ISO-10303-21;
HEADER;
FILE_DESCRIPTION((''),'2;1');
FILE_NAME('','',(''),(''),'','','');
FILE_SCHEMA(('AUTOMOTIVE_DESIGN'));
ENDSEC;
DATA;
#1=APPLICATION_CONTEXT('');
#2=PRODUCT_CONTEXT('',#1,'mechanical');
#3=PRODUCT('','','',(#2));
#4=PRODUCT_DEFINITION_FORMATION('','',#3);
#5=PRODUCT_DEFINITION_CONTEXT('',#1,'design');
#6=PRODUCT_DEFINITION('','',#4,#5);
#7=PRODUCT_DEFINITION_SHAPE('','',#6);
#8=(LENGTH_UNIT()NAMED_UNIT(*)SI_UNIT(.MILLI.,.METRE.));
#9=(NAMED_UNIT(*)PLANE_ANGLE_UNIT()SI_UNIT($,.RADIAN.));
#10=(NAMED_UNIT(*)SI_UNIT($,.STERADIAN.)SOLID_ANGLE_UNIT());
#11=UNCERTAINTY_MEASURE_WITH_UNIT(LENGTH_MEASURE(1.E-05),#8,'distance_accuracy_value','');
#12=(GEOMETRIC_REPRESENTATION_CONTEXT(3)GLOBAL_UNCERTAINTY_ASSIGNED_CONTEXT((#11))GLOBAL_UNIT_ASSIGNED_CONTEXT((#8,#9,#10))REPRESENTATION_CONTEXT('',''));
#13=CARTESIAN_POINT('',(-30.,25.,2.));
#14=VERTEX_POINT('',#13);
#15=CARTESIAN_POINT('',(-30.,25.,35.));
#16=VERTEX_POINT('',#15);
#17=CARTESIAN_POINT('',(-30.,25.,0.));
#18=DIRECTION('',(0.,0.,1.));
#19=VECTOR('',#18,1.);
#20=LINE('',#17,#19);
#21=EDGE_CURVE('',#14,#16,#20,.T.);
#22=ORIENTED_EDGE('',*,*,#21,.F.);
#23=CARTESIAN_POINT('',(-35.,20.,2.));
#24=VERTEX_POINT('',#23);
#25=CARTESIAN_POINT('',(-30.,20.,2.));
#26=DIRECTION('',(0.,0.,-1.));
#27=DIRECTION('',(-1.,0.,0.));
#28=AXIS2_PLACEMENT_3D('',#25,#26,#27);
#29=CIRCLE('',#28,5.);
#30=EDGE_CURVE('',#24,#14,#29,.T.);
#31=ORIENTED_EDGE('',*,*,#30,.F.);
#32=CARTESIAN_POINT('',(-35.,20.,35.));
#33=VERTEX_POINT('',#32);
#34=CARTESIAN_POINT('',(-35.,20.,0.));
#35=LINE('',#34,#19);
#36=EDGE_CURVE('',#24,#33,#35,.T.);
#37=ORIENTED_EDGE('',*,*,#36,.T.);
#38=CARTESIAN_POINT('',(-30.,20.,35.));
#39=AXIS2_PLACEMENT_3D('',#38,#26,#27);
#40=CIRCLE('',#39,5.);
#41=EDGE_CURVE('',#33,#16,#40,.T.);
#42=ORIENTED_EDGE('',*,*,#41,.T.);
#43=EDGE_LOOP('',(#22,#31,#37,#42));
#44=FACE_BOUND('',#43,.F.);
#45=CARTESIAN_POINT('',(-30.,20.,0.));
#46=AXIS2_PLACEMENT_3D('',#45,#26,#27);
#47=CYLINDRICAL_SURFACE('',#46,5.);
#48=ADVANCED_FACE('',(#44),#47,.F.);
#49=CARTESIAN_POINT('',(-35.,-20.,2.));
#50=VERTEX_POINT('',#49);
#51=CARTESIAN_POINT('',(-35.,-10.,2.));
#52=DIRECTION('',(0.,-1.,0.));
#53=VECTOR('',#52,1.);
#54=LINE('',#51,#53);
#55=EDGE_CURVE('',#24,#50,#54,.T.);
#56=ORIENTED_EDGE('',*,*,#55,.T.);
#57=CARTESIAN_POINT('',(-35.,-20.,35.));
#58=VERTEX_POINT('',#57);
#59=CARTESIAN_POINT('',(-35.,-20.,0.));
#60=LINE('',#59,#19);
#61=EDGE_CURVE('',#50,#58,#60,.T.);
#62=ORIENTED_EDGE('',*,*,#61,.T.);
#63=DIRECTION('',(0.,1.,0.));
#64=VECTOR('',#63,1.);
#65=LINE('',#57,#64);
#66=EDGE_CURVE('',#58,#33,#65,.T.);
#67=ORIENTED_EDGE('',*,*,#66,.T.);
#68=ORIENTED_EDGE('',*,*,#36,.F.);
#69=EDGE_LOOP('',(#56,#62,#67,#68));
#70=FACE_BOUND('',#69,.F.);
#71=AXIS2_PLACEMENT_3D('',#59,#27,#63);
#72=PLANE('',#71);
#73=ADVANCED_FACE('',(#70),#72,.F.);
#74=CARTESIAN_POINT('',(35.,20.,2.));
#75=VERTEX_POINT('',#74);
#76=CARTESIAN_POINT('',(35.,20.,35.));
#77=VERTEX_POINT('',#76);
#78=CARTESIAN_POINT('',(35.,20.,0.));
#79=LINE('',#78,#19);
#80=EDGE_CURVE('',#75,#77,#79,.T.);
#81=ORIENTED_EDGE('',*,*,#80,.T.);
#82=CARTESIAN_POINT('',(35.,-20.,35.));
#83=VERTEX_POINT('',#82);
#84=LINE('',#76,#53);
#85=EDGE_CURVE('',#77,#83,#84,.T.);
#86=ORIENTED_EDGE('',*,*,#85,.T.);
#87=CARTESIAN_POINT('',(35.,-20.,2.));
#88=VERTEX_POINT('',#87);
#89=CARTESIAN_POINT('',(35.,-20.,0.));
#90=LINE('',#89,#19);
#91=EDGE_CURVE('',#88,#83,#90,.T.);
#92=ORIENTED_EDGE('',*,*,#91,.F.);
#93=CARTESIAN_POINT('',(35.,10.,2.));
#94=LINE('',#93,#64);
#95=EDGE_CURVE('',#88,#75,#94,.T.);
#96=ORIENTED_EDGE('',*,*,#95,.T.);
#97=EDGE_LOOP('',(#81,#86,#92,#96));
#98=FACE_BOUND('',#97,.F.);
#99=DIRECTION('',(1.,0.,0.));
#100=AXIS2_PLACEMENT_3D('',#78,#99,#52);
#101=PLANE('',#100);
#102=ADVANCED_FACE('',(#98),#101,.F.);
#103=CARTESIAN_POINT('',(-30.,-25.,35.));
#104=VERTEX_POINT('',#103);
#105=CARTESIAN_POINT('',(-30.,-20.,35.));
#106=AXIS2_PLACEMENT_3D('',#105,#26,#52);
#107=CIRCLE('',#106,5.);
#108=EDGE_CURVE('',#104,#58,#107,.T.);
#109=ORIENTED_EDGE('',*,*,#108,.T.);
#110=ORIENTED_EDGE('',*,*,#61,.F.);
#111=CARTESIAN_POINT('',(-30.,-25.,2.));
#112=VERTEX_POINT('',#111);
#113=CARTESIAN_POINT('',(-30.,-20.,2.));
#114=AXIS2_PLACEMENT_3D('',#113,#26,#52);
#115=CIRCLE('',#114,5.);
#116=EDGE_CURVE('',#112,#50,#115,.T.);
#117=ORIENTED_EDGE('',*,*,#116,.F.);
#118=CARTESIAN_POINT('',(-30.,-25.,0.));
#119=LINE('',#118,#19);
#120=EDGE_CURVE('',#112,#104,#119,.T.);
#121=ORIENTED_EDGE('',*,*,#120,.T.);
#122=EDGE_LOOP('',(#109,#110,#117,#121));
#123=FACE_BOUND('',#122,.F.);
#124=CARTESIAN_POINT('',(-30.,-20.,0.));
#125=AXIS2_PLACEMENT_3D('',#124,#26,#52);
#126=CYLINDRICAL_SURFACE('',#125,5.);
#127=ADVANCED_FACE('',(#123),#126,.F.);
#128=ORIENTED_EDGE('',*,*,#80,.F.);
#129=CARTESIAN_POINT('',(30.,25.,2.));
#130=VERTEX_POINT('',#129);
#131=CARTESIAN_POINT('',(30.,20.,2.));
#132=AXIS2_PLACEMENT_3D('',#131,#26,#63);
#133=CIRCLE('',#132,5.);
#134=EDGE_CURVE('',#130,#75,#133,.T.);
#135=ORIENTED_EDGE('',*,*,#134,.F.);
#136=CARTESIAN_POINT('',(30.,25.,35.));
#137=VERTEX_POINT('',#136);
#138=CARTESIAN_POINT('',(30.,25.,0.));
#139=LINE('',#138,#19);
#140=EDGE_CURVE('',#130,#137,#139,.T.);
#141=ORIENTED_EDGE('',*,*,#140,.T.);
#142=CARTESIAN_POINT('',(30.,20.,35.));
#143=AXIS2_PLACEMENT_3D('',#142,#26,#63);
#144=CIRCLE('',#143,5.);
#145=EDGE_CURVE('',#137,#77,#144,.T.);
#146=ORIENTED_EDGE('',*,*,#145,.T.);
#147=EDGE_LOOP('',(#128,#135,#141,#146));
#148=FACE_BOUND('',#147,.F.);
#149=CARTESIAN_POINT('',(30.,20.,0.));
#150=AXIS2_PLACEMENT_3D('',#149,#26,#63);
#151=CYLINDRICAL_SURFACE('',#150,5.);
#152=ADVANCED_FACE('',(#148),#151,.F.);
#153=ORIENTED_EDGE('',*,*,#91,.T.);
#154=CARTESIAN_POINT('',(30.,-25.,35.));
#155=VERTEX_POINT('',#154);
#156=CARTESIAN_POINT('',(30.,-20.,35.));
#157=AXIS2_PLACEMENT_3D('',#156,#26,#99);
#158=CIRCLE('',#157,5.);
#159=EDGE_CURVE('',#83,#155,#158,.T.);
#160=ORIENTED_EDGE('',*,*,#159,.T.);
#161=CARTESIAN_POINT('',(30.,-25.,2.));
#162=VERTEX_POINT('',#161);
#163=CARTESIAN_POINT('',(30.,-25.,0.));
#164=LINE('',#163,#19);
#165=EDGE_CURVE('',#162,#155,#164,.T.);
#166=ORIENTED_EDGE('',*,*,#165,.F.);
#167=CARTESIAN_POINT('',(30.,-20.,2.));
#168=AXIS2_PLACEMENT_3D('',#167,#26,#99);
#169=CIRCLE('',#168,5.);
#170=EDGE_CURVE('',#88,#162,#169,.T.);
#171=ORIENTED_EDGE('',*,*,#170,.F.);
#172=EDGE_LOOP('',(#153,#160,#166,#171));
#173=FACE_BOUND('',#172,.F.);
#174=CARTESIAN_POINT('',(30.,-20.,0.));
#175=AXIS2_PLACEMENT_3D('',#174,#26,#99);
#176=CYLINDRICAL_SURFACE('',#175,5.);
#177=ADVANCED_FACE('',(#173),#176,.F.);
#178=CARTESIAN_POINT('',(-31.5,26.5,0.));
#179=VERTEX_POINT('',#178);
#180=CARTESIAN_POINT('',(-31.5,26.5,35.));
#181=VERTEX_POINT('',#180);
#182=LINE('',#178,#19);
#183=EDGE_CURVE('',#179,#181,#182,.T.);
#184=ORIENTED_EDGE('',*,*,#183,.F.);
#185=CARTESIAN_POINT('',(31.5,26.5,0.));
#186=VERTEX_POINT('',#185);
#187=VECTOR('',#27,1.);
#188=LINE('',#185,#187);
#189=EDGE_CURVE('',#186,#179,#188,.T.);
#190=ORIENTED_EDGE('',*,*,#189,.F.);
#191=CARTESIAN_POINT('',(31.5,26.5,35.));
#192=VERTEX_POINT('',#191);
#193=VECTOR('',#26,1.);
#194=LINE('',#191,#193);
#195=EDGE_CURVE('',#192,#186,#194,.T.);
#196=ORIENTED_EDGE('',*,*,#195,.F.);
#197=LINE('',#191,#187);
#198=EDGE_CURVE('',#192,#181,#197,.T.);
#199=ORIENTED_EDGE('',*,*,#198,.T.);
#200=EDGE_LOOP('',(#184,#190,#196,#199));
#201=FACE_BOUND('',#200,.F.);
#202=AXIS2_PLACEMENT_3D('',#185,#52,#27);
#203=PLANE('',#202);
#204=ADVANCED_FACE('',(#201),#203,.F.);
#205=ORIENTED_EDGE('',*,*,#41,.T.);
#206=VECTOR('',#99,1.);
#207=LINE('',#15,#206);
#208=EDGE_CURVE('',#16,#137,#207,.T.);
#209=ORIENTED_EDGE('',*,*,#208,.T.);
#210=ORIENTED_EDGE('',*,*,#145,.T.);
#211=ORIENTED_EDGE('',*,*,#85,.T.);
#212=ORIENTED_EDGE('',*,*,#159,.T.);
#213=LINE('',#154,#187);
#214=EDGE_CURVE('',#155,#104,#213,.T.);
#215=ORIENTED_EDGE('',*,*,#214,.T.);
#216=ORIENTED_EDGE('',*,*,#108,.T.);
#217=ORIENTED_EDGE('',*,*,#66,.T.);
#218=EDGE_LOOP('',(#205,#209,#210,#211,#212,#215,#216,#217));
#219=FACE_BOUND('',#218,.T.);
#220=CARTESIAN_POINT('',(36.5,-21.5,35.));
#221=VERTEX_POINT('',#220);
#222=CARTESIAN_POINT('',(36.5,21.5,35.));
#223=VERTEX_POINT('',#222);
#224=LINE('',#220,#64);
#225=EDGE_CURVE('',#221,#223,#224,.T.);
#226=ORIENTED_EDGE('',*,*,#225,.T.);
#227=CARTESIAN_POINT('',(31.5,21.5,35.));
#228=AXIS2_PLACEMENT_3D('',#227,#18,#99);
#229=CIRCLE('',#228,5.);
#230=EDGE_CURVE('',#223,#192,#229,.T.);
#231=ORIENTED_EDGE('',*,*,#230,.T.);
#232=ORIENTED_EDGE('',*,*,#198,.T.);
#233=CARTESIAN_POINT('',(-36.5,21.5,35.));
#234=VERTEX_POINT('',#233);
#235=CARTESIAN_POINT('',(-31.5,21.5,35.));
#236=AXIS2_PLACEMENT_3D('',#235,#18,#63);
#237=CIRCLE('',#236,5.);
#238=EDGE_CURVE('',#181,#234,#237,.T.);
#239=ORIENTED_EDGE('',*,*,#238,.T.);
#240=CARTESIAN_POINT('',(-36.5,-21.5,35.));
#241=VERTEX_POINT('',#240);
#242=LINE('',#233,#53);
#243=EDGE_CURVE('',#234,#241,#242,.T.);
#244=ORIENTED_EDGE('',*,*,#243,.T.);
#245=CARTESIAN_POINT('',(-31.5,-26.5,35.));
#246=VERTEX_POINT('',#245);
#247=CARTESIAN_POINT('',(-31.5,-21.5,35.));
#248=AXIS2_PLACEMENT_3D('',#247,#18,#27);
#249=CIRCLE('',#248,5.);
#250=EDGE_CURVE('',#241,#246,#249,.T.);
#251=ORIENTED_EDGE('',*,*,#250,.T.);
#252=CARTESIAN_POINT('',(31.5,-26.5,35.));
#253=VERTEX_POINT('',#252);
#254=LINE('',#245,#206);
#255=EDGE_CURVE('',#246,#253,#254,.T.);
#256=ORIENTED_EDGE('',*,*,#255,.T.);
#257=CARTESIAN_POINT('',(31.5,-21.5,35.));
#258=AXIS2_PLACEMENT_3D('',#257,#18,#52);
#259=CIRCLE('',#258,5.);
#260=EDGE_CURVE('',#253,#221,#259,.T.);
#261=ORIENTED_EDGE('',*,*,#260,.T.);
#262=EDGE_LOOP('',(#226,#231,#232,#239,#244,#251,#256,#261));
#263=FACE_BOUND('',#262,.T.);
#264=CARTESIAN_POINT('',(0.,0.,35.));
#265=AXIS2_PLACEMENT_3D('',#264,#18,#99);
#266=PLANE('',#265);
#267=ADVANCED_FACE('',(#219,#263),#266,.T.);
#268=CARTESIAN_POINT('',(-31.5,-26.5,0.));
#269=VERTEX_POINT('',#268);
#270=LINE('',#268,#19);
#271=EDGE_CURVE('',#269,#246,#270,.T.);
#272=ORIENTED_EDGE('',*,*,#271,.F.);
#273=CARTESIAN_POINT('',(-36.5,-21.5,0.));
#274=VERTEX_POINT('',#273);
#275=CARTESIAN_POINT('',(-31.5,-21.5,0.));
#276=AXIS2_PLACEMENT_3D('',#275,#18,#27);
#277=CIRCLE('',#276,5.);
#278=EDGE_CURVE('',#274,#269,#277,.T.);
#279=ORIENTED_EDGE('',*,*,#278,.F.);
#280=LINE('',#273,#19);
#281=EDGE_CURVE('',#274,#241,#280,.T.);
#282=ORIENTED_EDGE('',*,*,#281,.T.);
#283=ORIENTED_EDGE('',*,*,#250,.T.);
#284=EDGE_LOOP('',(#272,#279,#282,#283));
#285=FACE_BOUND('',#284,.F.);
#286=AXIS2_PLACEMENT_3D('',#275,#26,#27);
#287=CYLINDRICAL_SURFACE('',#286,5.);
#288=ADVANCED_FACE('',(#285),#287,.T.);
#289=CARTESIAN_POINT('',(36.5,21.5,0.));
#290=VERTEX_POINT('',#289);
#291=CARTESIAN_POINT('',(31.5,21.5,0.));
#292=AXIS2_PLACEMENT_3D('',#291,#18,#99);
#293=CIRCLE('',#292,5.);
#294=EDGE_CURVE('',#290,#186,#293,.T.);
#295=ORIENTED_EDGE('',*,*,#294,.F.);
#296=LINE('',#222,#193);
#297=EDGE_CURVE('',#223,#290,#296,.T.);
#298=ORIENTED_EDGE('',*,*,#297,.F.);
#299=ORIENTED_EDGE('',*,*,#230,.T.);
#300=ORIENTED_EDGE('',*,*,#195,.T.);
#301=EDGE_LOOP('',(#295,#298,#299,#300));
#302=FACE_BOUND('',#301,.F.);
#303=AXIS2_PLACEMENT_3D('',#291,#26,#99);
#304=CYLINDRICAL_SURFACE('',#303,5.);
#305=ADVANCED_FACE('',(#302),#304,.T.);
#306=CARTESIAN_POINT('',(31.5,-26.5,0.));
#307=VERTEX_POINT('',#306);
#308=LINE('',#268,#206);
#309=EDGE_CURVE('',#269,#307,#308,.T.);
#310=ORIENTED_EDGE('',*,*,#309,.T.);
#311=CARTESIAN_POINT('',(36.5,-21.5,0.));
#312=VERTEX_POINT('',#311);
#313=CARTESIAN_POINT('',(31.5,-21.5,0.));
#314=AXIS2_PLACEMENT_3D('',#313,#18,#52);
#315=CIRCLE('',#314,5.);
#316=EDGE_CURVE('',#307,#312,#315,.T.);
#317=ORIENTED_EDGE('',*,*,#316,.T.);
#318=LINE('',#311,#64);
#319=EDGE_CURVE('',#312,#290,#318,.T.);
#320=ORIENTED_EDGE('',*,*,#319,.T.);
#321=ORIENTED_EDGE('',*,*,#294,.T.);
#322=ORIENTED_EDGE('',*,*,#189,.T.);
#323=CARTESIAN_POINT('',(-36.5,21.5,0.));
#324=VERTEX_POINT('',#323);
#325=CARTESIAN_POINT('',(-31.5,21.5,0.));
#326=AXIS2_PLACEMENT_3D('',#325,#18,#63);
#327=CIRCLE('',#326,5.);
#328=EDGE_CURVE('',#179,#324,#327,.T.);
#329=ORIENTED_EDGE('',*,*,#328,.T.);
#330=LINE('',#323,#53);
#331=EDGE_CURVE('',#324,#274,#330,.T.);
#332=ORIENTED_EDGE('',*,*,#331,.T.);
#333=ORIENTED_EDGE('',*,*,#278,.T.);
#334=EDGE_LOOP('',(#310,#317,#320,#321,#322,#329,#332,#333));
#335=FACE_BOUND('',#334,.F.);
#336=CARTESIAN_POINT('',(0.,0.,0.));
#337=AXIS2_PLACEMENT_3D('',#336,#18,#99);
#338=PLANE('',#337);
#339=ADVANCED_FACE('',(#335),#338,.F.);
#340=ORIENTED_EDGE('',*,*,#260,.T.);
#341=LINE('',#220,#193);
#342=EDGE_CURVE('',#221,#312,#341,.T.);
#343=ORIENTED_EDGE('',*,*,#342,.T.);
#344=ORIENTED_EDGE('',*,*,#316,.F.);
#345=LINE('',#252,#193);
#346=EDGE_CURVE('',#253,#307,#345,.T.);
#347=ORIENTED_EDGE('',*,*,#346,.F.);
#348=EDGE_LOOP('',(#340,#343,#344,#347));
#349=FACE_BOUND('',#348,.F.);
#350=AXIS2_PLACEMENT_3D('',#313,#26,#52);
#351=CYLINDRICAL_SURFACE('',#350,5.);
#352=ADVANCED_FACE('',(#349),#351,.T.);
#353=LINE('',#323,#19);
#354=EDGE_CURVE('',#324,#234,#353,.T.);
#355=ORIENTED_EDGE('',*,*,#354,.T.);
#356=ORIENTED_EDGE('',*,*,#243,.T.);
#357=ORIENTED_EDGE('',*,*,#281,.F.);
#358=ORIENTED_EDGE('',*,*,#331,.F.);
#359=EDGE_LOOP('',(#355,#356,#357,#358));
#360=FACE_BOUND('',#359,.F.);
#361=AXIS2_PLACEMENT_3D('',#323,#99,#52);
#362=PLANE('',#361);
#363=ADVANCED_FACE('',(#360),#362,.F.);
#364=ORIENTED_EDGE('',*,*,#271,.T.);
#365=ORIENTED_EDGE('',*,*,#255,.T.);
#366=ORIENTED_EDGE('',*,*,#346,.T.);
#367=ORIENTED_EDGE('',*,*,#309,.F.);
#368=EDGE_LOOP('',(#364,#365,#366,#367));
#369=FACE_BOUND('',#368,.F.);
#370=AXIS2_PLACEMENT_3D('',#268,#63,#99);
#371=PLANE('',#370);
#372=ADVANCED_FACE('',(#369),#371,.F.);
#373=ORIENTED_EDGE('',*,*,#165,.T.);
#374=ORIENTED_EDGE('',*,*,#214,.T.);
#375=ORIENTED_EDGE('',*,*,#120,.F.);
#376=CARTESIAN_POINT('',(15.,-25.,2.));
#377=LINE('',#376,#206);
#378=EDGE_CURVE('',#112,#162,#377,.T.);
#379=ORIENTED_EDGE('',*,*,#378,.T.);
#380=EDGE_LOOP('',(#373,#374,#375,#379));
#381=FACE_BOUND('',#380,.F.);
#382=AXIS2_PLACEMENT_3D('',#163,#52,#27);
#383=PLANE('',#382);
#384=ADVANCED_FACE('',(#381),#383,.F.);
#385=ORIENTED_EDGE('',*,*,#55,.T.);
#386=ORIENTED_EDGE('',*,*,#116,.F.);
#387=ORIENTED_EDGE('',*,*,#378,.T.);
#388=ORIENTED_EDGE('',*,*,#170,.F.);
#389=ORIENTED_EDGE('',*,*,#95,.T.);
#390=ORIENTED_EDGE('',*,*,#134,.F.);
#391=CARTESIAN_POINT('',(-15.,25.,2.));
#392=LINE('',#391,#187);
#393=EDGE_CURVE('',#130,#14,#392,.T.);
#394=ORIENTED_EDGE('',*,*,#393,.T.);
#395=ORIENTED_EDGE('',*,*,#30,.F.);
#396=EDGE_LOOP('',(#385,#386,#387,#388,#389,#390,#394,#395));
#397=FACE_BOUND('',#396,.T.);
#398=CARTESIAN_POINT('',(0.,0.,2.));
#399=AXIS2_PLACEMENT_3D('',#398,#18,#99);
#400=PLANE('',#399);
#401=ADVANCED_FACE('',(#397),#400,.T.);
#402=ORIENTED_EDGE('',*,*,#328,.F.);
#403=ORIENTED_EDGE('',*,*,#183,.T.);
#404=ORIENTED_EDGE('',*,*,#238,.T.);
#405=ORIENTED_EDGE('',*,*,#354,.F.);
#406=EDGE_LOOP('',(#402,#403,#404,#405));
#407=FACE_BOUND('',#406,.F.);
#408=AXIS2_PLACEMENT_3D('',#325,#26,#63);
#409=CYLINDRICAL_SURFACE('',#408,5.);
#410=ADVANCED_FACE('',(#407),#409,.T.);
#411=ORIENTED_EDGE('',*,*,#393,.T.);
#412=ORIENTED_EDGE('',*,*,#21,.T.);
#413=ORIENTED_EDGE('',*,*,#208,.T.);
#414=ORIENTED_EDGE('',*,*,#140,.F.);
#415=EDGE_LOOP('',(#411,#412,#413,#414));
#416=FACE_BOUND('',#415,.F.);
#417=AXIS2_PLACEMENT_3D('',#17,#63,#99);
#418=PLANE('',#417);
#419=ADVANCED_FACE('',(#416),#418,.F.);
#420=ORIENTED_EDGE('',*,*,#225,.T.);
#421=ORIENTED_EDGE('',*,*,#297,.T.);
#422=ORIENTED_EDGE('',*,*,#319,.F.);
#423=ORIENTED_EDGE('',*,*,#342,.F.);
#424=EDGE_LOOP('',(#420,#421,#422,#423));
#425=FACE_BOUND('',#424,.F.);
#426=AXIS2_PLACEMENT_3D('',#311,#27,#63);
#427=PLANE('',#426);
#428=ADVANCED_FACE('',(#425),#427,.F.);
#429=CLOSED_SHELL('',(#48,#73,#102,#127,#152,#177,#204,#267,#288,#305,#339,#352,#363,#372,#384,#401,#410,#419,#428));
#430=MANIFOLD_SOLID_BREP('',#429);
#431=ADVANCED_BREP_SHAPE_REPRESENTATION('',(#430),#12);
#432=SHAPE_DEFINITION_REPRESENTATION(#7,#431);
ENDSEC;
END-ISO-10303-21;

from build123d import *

# Parameters (mm, degrees)
F1_DEPTH = 2
F2_DEPTH = 35


with BuildPart() as f1:
    # F0 (on Top) → F1 (new body)
    with BuildSketch(Plane.XY):
        with BuildLine():
            Line((31.5, 26.5), (-31.5, 26.5))
            ThreePointArc((-31.5, 26.5), (-35.0355339059, 25.0355339059), (-36.5, 21.5))
            Line((-36.5, 21.5), (-36.5, -21.5))
            ThreePointArc((-36.5, -21.5), (-35.0355339059, -25.0355339059), (-31.5, -26.5))
            Line((-31.5, -26.5), (31.5, -26.5))
            ThreePointArc((31.5, -26.5), (35.0355339059, -25.0355339059), (36.5, -21.5))
            Line((36.5, -21.5), (36.5, 21.5))
            ThreePointArc((36.5, 21.5), (35.0355339059, 25.0355339059), (31.5, 26.5))
        make_face()
        with BuildLine():
            ThreePointArc((-35, 20), (-33.5355339059, 23.5355339059), (-30, 25))
            Line((-30, 25), (30, 25))
            ThreePointArc((30, 25), (33.5355339059, 23.5355339059), (35, 20))
            Line((35, 20), (35, -20))
            ThreePointArc((35, -20), (33.5355339059, -23.5355339059), (30, -25))
            Line((30, -25), (-30, -25))
            ThreePointArc((-30, -25), (-33.5355339059, -23.5355339059), (-35, -20))
            Line((-35, -20), (-35, 20))
        make_face(mode=Mode.SUBTRACT)
        with BuildLine():
            Line((30, 25), (-30, 25))
            ThreePointArc((-30, 25), (-33.5355339059, 23.5355339059), (-35, 20))
            Line((-35, 20), (-35, -20))
            ThreePointArc((-35, -20), (-33.5355339059, -23.5355339059), (-30, -25))
            Line((-30, -25), (30, -25))
            ThreePointArc((30, -25), (33.5355339059, -23.5355339059), (35, -20))
            Line((35, -20), (35, 20))
            ThreePointArc((35, 20), (33.5355339059, 23.5355339059), (30, 25))
        make_face()
    extrude(amount=F1_DEPTH)

    # F0 (on Top) → F2 (join)
    with BuildSketch(Plane.XY):
        with BuildLine():
            Line((31.5, 26.5), (-31.5, 26.5))
            ThreePointArc((-31.5, 26.5), (-35.0355339059, 25.0355339059), (-36.5, 21.5))
            Line((-36.5, 21.5), (-36.5, -21.5))
            ThreePointArc((-36.5, -21.5), (-35.0355339059, -25.0355339059), (-31.5, -26.5))
            Line((-31.5, -26.5), (31.5, -26.5))
            ThreePointArc((31.5, -26.5), (35.0355339059, -25.0355339059), (36.5, -21.5))
            Line((36.5, -21.5), (36.5, 21.5))
            ThreePointArc((36.5, 21.5), (35.0355339059, 25.0355339059), (31.5, 26.5))
        make_face()
        with BuildLine():
            ThreePointArc((-35, 20), (-33.5355339059, 23.5355339059), (-30, 25))
            Line((-30, 25), (30, 25))
            ThreePointArc((30, 25), (33.5355339059, 23.5355339059), (35, 20))
            Line((35, 20), (35, -20))
            ThreePointArc((35, -20), (33.5355339059, -23.5355339059), (30, -25))
            Line((30, -25), (-30, -25))
            ThreePointArc((-30, -25), (-33.5355339059, -23.5355339059), (-35, -20))
            Line((-35, -20), (-35, 20))
        make_face(mode=Mode.SUBTRACT)
    extrude(amount=F2_DEPTH)


solid = f1.part
